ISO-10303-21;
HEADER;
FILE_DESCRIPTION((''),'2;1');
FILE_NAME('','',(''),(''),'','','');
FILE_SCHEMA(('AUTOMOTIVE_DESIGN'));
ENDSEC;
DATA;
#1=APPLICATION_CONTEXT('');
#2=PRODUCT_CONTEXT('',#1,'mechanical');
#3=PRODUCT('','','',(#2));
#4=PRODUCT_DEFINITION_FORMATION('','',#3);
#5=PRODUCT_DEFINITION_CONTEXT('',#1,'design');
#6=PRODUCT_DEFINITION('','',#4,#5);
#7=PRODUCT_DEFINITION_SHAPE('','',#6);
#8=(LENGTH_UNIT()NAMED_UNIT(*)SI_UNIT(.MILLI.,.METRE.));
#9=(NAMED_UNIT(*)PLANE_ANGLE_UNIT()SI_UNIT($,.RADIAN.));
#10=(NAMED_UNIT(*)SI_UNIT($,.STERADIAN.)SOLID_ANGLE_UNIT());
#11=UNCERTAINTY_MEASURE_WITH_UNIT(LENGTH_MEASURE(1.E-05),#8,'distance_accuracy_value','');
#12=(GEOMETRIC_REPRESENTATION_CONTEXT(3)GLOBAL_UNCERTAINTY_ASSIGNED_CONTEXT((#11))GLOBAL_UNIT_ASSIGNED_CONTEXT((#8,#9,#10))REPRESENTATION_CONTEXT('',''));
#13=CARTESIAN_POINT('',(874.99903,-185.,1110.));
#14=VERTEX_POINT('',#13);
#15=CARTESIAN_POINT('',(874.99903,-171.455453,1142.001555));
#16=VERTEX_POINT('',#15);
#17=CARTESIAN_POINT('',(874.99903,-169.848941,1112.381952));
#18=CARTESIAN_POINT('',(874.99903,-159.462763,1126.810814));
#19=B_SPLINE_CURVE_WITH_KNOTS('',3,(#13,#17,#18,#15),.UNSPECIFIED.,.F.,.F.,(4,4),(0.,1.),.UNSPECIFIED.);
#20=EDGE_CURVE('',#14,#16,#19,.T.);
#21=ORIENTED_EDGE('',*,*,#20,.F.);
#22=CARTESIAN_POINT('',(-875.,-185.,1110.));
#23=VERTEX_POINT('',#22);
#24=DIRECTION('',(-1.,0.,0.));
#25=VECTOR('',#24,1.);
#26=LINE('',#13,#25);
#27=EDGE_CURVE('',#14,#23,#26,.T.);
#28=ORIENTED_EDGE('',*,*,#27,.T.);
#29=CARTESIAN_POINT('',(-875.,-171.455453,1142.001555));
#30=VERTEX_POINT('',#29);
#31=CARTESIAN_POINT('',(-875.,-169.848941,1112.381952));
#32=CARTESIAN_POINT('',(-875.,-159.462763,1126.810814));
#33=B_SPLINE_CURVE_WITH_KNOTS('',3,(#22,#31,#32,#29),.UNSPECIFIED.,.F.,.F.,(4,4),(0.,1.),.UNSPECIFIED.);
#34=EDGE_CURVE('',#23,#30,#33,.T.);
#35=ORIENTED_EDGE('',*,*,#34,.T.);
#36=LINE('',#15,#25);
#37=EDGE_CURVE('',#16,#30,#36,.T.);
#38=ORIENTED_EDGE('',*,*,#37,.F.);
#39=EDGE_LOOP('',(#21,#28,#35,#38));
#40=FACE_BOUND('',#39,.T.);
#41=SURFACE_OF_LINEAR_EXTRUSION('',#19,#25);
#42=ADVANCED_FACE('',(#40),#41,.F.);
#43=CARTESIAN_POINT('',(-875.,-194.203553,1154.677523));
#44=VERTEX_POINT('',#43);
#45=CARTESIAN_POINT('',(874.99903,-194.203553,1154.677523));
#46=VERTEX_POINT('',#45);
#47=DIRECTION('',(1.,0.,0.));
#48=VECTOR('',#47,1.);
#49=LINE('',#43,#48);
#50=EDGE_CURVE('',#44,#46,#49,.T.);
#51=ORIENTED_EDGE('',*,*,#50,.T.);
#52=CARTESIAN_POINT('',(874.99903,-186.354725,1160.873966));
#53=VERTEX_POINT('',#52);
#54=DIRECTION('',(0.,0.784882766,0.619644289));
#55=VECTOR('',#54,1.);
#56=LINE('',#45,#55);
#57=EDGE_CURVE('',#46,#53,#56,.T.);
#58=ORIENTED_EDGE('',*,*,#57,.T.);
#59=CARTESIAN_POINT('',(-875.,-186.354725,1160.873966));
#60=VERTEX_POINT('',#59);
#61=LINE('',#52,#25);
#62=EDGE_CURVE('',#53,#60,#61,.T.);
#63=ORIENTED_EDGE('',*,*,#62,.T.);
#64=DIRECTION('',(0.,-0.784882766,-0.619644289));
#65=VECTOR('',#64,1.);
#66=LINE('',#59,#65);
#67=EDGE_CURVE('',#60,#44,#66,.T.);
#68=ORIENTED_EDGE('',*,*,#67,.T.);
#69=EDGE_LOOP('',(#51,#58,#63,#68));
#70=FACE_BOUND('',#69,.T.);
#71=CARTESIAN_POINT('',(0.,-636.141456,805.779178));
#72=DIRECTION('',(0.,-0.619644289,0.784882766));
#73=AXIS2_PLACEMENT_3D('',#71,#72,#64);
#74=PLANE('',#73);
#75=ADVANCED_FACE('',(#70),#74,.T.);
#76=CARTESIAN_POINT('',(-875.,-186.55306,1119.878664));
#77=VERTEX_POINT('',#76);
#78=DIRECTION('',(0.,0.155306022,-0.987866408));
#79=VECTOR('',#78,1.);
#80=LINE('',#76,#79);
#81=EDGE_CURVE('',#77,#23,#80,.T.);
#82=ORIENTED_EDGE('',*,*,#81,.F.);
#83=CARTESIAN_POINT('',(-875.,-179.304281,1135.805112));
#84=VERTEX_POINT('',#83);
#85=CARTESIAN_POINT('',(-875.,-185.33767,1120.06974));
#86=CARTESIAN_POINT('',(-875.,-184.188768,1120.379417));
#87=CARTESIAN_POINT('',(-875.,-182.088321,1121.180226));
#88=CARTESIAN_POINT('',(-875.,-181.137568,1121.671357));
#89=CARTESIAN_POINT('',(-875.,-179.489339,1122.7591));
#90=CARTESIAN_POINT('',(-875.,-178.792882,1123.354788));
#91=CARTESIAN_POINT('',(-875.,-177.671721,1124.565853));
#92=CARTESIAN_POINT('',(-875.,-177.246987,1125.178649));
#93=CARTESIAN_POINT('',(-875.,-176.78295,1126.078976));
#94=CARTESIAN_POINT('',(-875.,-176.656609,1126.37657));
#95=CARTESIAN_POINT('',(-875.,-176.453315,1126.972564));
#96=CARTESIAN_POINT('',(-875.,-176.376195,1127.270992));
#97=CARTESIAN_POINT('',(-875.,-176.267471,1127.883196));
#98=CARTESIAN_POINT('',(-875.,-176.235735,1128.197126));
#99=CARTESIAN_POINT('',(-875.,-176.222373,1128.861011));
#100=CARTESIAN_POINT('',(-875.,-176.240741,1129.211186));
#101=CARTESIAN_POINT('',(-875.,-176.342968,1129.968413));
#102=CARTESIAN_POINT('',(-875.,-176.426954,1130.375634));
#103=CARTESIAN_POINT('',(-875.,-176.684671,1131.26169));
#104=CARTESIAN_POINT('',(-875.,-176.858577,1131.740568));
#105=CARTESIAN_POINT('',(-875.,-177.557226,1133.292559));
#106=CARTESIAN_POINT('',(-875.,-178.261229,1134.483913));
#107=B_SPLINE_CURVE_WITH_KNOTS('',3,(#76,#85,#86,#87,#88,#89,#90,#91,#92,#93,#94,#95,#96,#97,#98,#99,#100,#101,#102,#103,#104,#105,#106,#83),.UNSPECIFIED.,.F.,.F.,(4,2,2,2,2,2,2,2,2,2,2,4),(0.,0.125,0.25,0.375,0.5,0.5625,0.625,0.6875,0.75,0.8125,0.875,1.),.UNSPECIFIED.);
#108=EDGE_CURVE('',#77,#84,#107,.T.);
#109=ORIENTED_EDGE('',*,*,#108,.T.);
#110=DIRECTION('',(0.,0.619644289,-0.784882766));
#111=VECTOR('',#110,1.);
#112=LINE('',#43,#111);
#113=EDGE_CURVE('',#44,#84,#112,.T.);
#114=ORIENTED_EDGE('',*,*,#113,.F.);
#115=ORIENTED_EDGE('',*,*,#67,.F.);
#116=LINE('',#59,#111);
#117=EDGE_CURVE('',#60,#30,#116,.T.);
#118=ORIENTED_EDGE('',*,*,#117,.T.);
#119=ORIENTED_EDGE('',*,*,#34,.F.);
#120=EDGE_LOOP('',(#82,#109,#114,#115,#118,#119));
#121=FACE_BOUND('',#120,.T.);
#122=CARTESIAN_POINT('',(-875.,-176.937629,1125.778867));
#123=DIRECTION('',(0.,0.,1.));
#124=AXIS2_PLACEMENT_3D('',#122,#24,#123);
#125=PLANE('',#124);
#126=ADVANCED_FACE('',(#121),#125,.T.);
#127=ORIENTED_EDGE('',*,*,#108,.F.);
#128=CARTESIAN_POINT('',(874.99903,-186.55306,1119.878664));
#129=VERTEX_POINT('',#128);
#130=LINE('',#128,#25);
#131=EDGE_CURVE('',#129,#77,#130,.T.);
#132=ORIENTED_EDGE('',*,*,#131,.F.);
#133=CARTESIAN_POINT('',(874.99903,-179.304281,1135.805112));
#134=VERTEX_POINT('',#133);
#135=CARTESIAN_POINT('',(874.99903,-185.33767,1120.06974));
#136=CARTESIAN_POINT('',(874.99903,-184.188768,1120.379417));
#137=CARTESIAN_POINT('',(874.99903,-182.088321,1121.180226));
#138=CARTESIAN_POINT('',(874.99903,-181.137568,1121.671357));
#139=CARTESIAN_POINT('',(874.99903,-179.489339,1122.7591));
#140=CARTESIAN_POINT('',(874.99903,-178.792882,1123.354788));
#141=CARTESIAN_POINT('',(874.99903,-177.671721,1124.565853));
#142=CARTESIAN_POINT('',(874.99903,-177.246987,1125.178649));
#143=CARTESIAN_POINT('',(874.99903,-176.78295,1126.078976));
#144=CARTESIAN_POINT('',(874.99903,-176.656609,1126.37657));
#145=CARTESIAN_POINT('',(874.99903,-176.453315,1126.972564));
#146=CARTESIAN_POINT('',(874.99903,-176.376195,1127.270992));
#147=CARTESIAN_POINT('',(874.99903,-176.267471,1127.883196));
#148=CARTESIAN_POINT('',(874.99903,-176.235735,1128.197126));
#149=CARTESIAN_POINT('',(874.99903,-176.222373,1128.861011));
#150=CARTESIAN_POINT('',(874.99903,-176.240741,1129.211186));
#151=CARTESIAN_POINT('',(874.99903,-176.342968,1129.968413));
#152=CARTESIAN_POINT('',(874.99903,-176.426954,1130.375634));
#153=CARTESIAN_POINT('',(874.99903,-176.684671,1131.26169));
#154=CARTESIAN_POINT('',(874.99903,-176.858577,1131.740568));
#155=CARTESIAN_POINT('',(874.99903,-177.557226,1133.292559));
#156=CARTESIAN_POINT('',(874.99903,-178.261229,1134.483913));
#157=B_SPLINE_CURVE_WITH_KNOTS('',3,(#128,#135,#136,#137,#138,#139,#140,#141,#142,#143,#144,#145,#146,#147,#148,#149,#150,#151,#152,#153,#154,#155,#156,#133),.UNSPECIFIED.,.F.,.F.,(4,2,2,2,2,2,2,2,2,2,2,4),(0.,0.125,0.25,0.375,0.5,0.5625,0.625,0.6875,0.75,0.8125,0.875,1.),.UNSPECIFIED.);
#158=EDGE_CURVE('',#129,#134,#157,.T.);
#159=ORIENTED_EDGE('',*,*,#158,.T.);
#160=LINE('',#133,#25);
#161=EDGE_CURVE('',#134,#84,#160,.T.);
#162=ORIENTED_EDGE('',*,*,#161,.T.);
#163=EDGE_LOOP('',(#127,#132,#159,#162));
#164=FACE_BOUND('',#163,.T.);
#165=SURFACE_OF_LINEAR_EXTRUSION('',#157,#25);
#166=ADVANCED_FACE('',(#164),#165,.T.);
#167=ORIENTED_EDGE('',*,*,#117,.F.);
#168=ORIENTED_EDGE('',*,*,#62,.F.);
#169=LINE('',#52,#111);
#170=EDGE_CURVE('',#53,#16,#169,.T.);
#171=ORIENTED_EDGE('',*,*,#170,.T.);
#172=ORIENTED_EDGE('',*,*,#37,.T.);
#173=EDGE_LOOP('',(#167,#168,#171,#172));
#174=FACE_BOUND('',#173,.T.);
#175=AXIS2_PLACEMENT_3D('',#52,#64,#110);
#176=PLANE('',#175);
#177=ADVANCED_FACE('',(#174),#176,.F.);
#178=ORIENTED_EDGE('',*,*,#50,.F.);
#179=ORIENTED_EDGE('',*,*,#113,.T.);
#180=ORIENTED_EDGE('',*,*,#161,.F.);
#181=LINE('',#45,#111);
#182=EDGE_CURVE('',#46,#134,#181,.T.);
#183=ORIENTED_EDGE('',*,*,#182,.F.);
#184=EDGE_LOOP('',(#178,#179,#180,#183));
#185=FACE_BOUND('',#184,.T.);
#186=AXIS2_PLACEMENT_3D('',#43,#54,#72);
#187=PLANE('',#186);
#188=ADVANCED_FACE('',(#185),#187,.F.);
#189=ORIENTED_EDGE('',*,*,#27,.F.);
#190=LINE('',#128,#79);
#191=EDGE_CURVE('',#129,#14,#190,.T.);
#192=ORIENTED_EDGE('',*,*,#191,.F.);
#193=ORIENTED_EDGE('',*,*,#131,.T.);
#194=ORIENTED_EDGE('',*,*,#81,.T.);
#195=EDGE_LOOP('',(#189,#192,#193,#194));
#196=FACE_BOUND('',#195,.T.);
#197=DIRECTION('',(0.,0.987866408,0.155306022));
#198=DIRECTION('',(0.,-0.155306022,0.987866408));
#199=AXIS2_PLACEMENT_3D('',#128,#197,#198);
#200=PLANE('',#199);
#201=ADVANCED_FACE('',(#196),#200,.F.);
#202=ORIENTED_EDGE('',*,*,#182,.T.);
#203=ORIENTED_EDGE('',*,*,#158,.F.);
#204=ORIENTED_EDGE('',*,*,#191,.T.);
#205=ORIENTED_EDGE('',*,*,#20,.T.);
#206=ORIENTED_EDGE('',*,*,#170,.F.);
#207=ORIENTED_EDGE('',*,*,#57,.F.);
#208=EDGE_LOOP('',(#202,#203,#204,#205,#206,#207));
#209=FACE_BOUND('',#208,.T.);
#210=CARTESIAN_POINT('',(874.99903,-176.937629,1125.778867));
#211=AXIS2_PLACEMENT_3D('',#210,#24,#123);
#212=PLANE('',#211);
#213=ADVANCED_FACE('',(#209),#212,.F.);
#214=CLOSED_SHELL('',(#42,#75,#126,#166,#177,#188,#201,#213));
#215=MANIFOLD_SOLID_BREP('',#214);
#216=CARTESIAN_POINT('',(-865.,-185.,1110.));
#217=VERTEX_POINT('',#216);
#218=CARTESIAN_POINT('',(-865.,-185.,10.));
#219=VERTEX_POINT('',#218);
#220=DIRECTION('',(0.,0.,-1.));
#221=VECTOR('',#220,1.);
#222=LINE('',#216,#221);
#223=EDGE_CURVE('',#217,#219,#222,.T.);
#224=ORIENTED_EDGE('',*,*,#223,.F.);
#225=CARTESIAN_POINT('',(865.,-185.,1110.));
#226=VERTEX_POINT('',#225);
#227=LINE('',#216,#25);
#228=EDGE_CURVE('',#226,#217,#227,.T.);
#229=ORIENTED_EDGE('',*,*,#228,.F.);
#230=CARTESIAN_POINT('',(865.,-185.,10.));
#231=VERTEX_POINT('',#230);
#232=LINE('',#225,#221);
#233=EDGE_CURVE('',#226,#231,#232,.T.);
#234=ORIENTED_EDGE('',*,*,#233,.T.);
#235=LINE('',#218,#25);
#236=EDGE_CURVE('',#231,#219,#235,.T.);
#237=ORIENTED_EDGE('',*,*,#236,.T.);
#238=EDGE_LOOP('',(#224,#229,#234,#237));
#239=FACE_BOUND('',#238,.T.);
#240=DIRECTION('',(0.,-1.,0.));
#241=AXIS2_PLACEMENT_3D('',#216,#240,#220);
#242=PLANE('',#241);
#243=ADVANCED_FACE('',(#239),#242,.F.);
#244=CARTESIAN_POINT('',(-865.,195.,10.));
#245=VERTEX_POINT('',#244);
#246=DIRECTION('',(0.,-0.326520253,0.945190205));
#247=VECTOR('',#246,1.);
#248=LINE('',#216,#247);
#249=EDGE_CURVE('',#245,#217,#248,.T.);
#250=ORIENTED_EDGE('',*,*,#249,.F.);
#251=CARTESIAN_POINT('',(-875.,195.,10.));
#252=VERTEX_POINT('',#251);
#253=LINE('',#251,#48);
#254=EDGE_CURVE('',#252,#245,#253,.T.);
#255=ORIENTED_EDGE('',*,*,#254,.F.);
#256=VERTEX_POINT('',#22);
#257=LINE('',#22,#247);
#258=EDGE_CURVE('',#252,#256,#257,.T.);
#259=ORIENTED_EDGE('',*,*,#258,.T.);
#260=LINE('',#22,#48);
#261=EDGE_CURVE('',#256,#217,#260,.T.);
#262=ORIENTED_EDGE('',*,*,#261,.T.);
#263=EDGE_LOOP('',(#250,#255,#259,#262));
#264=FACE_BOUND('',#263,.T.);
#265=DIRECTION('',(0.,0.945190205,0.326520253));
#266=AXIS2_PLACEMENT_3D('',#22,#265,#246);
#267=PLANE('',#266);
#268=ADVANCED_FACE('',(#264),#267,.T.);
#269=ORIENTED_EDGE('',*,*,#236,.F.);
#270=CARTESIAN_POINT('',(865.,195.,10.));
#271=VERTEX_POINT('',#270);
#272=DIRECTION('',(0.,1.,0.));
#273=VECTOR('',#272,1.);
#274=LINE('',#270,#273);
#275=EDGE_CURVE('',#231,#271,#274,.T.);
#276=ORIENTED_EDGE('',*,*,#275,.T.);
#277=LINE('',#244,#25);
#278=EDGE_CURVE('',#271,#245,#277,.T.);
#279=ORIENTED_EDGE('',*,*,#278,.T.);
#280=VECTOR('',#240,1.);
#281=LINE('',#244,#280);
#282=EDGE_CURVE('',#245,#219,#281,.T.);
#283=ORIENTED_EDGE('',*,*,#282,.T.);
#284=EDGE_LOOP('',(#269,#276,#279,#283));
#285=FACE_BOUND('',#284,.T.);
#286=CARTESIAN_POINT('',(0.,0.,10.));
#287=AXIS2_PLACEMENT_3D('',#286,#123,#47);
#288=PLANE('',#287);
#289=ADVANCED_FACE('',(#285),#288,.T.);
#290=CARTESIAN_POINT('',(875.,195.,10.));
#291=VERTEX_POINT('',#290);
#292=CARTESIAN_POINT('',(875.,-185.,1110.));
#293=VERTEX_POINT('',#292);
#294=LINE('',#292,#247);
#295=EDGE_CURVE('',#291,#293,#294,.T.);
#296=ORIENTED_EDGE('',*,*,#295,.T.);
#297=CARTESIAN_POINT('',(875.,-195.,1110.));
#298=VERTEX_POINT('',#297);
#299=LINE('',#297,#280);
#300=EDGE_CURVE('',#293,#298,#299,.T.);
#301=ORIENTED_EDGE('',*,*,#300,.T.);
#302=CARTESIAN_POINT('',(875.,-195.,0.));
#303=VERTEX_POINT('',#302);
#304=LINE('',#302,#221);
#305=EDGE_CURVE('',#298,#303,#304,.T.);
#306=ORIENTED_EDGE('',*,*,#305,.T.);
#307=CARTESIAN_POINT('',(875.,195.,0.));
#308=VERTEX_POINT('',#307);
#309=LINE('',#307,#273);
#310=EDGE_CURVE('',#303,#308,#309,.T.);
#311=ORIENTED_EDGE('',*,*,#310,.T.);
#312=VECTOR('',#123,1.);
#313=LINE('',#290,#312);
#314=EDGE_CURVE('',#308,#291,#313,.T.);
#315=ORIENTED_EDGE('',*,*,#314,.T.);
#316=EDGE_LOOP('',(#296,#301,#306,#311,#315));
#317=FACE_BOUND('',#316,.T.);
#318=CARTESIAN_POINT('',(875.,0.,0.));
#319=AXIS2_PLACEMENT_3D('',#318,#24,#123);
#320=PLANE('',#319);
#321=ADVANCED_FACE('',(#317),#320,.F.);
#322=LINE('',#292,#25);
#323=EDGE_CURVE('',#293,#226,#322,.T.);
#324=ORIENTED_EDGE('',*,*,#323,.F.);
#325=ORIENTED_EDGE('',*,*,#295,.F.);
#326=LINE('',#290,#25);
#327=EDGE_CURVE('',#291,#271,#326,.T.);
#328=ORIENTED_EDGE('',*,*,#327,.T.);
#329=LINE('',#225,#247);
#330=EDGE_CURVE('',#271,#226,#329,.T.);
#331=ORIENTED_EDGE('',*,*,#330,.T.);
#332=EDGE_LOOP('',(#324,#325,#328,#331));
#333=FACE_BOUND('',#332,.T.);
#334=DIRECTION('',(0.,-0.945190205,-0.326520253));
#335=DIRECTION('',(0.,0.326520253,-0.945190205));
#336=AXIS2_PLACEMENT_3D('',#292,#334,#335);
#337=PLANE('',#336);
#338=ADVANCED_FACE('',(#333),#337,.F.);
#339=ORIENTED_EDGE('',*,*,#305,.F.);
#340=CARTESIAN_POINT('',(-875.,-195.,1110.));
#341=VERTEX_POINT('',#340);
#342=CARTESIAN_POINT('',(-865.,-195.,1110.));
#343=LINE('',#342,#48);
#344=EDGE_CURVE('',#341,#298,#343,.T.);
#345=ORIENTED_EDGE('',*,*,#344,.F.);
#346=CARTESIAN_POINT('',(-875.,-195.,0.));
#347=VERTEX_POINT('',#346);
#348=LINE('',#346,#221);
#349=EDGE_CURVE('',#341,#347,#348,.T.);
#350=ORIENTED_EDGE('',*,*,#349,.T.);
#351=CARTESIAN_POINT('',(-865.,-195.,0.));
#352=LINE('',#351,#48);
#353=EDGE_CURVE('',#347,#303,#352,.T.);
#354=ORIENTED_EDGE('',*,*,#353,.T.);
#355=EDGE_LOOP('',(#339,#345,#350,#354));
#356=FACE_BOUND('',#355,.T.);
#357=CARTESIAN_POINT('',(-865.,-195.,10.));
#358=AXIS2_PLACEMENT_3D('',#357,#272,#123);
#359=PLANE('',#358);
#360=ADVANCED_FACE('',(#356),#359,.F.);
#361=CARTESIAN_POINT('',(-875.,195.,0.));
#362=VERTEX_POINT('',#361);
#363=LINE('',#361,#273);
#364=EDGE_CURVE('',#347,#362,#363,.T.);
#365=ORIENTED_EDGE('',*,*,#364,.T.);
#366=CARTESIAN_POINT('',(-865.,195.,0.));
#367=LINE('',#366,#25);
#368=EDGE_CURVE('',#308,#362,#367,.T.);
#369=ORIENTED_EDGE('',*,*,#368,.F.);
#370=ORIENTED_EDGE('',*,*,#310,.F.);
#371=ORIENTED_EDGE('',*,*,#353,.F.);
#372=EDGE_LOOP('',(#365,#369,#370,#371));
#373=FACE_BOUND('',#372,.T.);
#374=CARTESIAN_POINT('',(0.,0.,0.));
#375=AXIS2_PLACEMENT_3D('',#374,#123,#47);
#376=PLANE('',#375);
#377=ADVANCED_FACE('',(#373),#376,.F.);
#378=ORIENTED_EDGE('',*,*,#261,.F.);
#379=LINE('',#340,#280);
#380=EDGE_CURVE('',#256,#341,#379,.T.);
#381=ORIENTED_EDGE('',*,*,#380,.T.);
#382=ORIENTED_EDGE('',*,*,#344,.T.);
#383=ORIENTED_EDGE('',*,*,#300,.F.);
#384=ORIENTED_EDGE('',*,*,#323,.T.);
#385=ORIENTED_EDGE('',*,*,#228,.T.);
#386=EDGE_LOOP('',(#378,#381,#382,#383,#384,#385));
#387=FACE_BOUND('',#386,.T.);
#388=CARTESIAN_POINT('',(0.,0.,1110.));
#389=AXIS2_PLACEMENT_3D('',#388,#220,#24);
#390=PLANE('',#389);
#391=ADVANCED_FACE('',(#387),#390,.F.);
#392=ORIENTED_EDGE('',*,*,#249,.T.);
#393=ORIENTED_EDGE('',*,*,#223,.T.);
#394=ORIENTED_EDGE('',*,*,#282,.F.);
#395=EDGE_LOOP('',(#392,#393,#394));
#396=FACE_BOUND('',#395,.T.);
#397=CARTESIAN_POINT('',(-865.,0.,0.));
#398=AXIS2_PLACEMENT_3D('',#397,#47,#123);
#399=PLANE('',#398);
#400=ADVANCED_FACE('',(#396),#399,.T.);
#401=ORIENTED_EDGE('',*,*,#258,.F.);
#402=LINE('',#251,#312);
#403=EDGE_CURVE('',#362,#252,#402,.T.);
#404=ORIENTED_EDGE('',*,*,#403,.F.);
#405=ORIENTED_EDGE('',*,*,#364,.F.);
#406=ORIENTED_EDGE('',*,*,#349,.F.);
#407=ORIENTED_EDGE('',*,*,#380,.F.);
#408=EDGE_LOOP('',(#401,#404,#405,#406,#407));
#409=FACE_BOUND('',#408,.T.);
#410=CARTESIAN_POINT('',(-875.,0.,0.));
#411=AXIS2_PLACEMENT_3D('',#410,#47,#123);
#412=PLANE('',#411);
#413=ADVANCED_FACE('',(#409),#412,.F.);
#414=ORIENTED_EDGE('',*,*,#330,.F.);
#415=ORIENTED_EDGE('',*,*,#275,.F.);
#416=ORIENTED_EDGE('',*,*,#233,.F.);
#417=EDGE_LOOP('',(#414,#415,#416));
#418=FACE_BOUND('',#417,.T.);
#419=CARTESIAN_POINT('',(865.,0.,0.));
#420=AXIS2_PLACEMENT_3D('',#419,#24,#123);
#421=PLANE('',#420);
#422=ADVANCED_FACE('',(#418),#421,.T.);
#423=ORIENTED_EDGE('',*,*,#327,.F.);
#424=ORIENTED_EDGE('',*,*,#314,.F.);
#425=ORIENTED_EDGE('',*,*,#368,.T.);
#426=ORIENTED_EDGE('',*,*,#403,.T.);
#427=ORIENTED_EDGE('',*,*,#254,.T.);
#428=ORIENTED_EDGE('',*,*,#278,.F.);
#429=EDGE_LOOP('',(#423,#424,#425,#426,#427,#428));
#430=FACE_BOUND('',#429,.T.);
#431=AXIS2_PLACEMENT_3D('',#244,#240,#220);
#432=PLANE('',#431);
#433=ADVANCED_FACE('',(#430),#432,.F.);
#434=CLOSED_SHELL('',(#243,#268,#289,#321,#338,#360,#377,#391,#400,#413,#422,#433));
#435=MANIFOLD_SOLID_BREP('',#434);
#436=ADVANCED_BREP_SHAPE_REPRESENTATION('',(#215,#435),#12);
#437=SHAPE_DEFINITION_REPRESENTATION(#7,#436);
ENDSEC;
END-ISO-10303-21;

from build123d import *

# Parameters (mm, degrees)
SKETCH1_W           = 1730
SKETCH1_H           = 390
BOSS_EXTRUDE1_DEPTH = 10
SKETCH2_W           = 1730
SKETCH2_H           = 10
BOSS_EXTRUDE2_DEPTH = 1100
BOSS_EXTRUDE3_DEPTH = 10
EXTRUDE_THIN4_START = -9.999030268
EXTRUDE_THIN4_DEPTH = 1749.999030268
SKETCH7_W           = 1749.999030268
SKETCH7_H           = 10
BOSS_EXTRUDE5_DEPTH = 24.044878722


# Read off the part's stored shape, not the designer's step: Extrude-Thin4
with BuildPart() as part:
    # Sketch1 → Boss-Extrude1 (new body)
    with BuildSketch(Plane.XY):
        Rectangle(SKETCH1_W, SKETCH1_H)
    extrude(amount=BOSS_EXTRUDE1_DEPTH)

    # Sketch2 → Boss-Extrude2 (add)
    with BuildSketch(Plane.XY.offset(10)):
        with Locations((0, -190)):
            Rectangle(SKETCH2_W, SKETCH2_H)
    extrude(amount=BOSS_EXTRUDE2_DEPTH)

    # Sketch3 → Boss-Extrude3 (add)
    with BuildSketch(Plane(origin=(865, 0, 0), x_dir=(0, 0, -1), z_dir=(1, 0, 0))):
        Polygon((-1110, -185), (-10, 195), (0, 195), (0, -195), (-1110, -195), align=None)
    boss_extrude3 = extrude(amount=BOSS_EXTRUDE3_DEPTH)

    # Mirror1: Boss-Extrude3 across plane
    add(boss_extrude3.mirror(Plane(origin=(0, 0, 0), x_dir=(0, 0, 1), z_dir=(1, 0, 0))))


with BuildPart() as body_2:
    # Extrude-Thin4 outline → Extrude-Thin4 (new body)
    with BuildSketch(Plane.ZY.offset(-865).offset(EXTRUDE_THIN4_START)):
        with BuildLine():
            Line((1110, -185), (1119.878664077, -186.553060223))
            add(Edge.make_bspline(
                [(1119.878664077, -186.553060223), (1120.06973986, -185.337670476), (1120.379416846, -184.188767651), (1121.180226007, -182.08832069), (1121.671356856, -181.137567773), (1122.759100406, -179.489339069), (1123.354788202, -178.792882476), (1124.565853221, -177.671721163), (1125.178648954, -177.246987467), (1126.078975873, -176.782949501), (1126.376570147, -176.656608706), (1126.972563894, -176.453314873), (1127.270992066, -176.376195381), (1127.883195991, -176.267470575), (1128.197126391, -176.235735176), (1128.861010901, -176.222372807), (1129.211185828, -176.240740953), (1129.968413198, -176.342967966), (1130.375633591, -176.426954176), (1131.261690179, -176.684670954), (1131.740567554, -176.85857696), (1133.292558686, -177.557226078), (1134.483913132, -178.261229015), (1135.8051123, -179.30428099)],
                knots=[0, 0, 0, 0, 0.125, 0.125, 0.25, 0.25, 0.375, 0.375, 0.5, 0.5, 0.5625, 0.5625, 0.625, 0.625, 0.6875, 0.6875, 0.75, 0.75, 0.8125, 0.8125, 0.875, 0.875, 1, 1, 1, 1], degree=3))
            Line((1135.8051123, -179.30428099), (1142.001555186, -171.455453334))
            add(Edge.make_bspline(
                [(1110, -185), (1112.38195229, -169.848941357), (1126.810813816, -159.462762779), (1142.001555186, -171.455453334)],
                knots=[0, 0, 0, 0, 1, 1, 1, 1], degree=3))
        make_face()
    extrude(amount=EXTRUDE_THIN4_DEPTH)

    # Sketch7 → Boss-Extrude5 (add)
    with BuildSketch(Plane(origin=(0, -621.24218469, 786.906767274), x_dir=(1, 0, 0), z_dir=(0, -0.6196442885790174, 0.7848827655334288))):
        with Locations((-0.000484866, 568.06231084)):
            Rectangle(SKETCH7_W, SKETCH7_H)
    extrude(amount=BOSS_EXTRUDE5_DEPTH)


solid = Compound([part.part, body_2.part])
